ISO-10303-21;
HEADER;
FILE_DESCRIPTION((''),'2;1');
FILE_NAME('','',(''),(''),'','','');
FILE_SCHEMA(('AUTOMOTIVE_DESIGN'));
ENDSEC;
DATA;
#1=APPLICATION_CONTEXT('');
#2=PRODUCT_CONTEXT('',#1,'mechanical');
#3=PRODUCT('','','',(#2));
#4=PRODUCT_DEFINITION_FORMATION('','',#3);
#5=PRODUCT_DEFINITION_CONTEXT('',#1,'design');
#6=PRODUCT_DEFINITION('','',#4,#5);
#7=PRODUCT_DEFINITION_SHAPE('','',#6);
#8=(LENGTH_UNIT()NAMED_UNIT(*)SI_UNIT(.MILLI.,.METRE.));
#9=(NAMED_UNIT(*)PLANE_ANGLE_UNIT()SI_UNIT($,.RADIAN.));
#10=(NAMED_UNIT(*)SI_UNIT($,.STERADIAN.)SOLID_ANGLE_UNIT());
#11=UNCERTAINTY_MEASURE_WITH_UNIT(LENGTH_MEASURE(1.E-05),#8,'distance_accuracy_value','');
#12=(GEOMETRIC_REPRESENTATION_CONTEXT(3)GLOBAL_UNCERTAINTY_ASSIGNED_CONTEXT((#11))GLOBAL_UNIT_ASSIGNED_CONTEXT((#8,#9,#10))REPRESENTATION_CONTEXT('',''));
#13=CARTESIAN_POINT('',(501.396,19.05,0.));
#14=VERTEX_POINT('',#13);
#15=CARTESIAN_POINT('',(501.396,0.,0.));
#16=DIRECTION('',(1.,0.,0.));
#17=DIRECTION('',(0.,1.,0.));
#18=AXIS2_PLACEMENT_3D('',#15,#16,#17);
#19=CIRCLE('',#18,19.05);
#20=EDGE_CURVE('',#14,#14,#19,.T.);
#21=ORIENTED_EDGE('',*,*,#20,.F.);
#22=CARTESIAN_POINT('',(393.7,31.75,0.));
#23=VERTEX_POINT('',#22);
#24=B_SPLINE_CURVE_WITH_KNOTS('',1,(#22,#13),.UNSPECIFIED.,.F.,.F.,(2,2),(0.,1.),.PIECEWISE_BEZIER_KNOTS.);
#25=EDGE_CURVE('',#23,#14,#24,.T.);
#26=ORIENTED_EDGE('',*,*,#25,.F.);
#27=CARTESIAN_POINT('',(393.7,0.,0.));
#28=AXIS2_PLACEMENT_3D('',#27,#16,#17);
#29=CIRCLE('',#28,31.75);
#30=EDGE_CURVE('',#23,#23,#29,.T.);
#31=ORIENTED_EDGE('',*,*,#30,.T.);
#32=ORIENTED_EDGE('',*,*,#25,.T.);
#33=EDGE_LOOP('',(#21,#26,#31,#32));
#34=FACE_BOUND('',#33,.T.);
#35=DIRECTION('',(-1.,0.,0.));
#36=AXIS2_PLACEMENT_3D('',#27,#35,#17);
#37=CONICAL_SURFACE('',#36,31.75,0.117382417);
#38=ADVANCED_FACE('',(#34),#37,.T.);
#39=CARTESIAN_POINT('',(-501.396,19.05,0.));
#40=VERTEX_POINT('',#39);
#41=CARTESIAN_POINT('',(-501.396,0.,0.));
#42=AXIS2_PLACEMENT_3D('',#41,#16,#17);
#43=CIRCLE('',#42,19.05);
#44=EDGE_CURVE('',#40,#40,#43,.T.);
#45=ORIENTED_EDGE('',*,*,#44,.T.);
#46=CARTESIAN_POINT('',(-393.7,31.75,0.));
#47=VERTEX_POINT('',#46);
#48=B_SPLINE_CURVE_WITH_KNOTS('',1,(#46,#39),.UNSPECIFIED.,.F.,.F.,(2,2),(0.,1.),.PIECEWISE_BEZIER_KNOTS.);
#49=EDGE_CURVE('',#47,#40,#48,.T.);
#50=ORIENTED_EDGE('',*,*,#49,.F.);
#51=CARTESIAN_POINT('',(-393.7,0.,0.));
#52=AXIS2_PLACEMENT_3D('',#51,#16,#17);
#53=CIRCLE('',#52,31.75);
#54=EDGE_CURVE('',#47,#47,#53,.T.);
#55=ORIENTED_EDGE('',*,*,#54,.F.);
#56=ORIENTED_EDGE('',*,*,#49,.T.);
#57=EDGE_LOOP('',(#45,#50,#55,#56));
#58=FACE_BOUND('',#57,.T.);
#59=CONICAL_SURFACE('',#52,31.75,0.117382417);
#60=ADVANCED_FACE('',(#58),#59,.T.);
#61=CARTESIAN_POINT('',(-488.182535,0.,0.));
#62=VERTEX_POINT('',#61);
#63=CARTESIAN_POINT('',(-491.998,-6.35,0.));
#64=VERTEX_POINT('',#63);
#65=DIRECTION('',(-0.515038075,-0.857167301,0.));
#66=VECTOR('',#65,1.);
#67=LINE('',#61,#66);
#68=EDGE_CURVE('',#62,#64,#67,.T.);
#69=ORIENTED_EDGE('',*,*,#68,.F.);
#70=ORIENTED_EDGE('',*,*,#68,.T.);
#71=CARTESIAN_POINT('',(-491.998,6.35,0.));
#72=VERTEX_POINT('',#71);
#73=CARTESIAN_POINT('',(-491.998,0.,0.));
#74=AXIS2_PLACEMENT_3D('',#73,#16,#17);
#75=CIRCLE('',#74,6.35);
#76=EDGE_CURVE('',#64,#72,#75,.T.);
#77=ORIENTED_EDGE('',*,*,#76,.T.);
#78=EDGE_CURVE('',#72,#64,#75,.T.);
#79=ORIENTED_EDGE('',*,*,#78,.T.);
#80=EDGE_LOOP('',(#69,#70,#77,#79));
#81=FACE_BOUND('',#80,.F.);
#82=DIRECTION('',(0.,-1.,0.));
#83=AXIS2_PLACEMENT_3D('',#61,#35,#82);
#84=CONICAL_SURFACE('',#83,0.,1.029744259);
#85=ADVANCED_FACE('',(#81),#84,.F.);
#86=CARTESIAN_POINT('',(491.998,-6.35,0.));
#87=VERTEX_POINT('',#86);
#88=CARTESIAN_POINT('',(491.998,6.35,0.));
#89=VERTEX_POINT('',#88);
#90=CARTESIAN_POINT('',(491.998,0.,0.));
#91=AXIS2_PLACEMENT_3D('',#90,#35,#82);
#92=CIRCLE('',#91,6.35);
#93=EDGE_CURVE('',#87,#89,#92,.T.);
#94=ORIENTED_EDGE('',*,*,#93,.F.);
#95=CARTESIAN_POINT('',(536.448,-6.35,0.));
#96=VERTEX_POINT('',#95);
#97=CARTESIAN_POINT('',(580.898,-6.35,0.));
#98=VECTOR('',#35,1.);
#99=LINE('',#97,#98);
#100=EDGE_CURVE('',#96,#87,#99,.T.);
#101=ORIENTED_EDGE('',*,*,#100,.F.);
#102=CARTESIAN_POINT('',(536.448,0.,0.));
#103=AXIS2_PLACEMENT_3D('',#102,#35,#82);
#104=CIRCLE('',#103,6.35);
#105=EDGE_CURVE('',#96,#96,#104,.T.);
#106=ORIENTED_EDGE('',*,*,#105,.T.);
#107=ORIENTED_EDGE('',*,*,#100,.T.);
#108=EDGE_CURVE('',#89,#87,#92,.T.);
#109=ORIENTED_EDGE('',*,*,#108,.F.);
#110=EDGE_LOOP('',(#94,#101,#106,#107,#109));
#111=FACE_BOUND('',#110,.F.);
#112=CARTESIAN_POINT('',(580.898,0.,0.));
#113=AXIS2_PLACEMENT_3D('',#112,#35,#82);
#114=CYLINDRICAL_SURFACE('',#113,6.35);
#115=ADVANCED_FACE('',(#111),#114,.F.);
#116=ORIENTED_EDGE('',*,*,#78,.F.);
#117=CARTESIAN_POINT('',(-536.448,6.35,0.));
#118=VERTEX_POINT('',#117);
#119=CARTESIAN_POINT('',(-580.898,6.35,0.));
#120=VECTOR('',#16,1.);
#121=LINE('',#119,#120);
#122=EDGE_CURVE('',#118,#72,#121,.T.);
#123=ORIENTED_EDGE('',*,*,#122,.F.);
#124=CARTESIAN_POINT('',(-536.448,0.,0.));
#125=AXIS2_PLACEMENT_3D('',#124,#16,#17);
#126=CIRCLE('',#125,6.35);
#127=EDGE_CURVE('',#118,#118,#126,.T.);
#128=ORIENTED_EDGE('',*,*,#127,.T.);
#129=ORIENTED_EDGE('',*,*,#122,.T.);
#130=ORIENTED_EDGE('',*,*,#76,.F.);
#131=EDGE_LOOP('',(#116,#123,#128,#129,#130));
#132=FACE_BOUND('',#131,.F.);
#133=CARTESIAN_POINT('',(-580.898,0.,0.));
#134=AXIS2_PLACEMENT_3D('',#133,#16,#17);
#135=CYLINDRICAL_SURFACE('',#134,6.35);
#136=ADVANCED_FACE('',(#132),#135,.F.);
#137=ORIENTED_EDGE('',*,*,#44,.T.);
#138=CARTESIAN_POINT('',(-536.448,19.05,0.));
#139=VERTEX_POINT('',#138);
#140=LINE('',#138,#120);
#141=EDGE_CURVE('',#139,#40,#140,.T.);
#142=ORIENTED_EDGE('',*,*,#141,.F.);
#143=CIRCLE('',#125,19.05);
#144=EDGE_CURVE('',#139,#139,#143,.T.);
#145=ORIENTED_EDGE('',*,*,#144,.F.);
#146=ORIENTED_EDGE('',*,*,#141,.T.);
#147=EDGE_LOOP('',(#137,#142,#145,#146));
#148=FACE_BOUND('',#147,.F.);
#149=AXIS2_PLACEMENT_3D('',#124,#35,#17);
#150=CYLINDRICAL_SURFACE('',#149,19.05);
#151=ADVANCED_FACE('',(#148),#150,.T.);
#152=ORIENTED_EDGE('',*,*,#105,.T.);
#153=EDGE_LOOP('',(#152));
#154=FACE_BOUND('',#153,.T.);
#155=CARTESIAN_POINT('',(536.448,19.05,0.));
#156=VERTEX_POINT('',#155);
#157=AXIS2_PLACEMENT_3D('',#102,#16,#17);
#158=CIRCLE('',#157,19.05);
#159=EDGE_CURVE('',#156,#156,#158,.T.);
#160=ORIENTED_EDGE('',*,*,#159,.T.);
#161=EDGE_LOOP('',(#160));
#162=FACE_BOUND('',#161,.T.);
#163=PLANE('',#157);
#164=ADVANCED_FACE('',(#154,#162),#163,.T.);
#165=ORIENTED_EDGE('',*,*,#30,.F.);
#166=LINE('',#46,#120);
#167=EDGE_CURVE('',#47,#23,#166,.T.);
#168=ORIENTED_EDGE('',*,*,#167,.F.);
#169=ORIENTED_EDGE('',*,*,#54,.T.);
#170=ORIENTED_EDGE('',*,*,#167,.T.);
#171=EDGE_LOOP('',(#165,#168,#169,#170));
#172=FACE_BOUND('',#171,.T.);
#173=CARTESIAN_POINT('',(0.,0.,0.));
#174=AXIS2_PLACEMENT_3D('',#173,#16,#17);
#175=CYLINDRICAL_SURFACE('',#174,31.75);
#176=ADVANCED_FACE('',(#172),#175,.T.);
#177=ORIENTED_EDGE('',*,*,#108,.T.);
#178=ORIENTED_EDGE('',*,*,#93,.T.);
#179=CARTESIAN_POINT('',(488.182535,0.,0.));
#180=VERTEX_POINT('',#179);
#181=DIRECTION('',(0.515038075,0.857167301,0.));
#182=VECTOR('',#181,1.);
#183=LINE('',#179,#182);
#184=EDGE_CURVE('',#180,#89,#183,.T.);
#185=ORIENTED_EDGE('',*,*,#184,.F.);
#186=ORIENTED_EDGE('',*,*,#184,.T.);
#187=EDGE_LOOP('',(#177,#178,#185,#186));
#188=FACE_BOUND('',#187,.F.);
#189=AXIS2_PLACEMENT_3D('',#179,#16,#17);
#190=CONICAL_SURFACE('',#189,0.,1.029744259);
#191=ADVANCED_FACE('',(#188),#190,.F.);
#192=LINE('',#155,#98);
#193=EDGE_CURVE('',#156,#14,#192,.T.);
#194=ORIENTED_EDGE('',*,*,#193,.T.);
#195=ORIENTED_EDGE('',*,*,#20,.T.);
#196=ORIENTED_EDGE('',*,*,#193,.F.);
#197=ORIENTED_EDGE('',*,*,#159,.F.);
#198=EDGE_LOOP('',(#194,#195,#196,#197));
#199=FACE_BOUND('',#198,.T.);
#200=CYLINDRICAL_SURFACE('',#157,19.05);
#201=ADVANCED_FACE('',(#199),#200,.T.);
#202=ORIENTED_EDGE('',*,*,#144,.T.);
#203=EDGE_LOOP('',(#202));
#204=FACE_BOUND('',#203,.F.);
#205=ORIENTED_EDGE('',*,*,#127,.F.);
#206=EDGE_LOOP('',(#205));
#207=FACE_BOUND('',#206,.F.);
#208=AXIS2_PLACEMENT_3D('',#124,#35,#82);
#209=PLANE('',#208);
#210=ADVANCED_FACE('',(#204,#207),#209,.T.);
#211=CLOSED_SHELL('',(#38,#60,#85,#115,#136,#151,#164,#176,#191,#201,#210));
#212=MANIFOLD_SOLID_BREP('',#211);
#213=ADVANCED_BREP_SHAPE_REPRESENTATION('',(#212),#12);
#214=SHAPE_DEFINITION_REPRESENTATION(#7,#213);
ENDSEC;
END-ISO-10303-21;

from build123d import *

# Parameters (mm, degrees)
F0_R       = 31.75
F1_DEPTH   = 393.7
F3_R       = 19.05
F4_DEPTH   = 35.052
F1_FACE_R  = 31.75
F4_FACE_R  = 19.05
F1_FACE1_R = 31.75
F5_FACE_R  = 19.05
F9_D       = 12.7
F9_DEPTH   = 44.45
F9_TIP     = 3.8154649308
F11_D      = 12.7
F11_DEPTH  = 44.45
F11_TIP    = 3.8154649308


with BuildPart() as f1:
    # F0 (on Right) → F1 (new body, symmetric)
    with BuildSketch(Plane.YZ):
        Circle(F0_R)
    extrude(amount=F1_DEPTH, both=True)



with BuildPart() as f4:
    # F3 (on offset) → F4 (new body)
    with BuildSketch(Plane.YZ.offset(536.448)):
        Circle(F3_R)
    extrude(amount=-F4_DEPTH)


with BuildPart() as f5_1:
    # F5: instance of F4
    add(f4.part.mirror(Plane.YZ))


with BuildPart() as f1_1:
    add(f1.part)

    add(f4.part)  # F6 merges F4
    # F1_face (on face) → F6 section 0
    with BuildSketch(Plane.YZ.offset(393.7)):
        Circle(F1_FACE_R)
    # F4_face (on face) → F6 section 1
    with BuildSketch(Plane(origin=(501.396, 0, 0), x_dir=(0, 1, 0), z_dir=(-1, 0, 0))):
        Circle(F4_FACE_R)
    loft()


    add(f5_1.part)  # F7 merges F5_1
    # F1_face1 (on face) → F7 section 0
    with BuildSketch(Plane(origin=(-393.7, 0, 0), x_dir=(0, 1, 0), z_dir=(-1, 0, 0))):
        Circle(F1_FACE1_R)
    # F5_face (on face) → F7 section 1
    with BuildSketch(Plane.YZ.offset(-501.396)):
        Circle(F5_FACE_R)
    loft()

    # F9
    with Locations(Plane.YZ.offset(536.448)):
        with Locations((0, 0)):
            Hole(F9_D / 2, depth=F9_DEPTH)
            with Locations((0, 0, -(F9_DEPTH + F9_TIP / 2))):  # 118° drill point
                Cone(0, F9_D / 2, F9_TIP, mode=Mode.SUBTRACT)

    # F11
    with Locations(Plane(origin=(-536.448, 0, 0), x_dir=(0, -1, 0), z_dir=(-1, 0, 0))):
        with Locations((0, 0)):
            Hole(F11_D / 2, depth=F11_DEPTH)
            with Locations((0, 0, -(F11_DEPTH + F11_TIP / 2))):  # 118° drill point
                Cone(0, F11_D / 2, F11_TIP, mode=Mode.SUBTRACT)


solid = f1_1.part
